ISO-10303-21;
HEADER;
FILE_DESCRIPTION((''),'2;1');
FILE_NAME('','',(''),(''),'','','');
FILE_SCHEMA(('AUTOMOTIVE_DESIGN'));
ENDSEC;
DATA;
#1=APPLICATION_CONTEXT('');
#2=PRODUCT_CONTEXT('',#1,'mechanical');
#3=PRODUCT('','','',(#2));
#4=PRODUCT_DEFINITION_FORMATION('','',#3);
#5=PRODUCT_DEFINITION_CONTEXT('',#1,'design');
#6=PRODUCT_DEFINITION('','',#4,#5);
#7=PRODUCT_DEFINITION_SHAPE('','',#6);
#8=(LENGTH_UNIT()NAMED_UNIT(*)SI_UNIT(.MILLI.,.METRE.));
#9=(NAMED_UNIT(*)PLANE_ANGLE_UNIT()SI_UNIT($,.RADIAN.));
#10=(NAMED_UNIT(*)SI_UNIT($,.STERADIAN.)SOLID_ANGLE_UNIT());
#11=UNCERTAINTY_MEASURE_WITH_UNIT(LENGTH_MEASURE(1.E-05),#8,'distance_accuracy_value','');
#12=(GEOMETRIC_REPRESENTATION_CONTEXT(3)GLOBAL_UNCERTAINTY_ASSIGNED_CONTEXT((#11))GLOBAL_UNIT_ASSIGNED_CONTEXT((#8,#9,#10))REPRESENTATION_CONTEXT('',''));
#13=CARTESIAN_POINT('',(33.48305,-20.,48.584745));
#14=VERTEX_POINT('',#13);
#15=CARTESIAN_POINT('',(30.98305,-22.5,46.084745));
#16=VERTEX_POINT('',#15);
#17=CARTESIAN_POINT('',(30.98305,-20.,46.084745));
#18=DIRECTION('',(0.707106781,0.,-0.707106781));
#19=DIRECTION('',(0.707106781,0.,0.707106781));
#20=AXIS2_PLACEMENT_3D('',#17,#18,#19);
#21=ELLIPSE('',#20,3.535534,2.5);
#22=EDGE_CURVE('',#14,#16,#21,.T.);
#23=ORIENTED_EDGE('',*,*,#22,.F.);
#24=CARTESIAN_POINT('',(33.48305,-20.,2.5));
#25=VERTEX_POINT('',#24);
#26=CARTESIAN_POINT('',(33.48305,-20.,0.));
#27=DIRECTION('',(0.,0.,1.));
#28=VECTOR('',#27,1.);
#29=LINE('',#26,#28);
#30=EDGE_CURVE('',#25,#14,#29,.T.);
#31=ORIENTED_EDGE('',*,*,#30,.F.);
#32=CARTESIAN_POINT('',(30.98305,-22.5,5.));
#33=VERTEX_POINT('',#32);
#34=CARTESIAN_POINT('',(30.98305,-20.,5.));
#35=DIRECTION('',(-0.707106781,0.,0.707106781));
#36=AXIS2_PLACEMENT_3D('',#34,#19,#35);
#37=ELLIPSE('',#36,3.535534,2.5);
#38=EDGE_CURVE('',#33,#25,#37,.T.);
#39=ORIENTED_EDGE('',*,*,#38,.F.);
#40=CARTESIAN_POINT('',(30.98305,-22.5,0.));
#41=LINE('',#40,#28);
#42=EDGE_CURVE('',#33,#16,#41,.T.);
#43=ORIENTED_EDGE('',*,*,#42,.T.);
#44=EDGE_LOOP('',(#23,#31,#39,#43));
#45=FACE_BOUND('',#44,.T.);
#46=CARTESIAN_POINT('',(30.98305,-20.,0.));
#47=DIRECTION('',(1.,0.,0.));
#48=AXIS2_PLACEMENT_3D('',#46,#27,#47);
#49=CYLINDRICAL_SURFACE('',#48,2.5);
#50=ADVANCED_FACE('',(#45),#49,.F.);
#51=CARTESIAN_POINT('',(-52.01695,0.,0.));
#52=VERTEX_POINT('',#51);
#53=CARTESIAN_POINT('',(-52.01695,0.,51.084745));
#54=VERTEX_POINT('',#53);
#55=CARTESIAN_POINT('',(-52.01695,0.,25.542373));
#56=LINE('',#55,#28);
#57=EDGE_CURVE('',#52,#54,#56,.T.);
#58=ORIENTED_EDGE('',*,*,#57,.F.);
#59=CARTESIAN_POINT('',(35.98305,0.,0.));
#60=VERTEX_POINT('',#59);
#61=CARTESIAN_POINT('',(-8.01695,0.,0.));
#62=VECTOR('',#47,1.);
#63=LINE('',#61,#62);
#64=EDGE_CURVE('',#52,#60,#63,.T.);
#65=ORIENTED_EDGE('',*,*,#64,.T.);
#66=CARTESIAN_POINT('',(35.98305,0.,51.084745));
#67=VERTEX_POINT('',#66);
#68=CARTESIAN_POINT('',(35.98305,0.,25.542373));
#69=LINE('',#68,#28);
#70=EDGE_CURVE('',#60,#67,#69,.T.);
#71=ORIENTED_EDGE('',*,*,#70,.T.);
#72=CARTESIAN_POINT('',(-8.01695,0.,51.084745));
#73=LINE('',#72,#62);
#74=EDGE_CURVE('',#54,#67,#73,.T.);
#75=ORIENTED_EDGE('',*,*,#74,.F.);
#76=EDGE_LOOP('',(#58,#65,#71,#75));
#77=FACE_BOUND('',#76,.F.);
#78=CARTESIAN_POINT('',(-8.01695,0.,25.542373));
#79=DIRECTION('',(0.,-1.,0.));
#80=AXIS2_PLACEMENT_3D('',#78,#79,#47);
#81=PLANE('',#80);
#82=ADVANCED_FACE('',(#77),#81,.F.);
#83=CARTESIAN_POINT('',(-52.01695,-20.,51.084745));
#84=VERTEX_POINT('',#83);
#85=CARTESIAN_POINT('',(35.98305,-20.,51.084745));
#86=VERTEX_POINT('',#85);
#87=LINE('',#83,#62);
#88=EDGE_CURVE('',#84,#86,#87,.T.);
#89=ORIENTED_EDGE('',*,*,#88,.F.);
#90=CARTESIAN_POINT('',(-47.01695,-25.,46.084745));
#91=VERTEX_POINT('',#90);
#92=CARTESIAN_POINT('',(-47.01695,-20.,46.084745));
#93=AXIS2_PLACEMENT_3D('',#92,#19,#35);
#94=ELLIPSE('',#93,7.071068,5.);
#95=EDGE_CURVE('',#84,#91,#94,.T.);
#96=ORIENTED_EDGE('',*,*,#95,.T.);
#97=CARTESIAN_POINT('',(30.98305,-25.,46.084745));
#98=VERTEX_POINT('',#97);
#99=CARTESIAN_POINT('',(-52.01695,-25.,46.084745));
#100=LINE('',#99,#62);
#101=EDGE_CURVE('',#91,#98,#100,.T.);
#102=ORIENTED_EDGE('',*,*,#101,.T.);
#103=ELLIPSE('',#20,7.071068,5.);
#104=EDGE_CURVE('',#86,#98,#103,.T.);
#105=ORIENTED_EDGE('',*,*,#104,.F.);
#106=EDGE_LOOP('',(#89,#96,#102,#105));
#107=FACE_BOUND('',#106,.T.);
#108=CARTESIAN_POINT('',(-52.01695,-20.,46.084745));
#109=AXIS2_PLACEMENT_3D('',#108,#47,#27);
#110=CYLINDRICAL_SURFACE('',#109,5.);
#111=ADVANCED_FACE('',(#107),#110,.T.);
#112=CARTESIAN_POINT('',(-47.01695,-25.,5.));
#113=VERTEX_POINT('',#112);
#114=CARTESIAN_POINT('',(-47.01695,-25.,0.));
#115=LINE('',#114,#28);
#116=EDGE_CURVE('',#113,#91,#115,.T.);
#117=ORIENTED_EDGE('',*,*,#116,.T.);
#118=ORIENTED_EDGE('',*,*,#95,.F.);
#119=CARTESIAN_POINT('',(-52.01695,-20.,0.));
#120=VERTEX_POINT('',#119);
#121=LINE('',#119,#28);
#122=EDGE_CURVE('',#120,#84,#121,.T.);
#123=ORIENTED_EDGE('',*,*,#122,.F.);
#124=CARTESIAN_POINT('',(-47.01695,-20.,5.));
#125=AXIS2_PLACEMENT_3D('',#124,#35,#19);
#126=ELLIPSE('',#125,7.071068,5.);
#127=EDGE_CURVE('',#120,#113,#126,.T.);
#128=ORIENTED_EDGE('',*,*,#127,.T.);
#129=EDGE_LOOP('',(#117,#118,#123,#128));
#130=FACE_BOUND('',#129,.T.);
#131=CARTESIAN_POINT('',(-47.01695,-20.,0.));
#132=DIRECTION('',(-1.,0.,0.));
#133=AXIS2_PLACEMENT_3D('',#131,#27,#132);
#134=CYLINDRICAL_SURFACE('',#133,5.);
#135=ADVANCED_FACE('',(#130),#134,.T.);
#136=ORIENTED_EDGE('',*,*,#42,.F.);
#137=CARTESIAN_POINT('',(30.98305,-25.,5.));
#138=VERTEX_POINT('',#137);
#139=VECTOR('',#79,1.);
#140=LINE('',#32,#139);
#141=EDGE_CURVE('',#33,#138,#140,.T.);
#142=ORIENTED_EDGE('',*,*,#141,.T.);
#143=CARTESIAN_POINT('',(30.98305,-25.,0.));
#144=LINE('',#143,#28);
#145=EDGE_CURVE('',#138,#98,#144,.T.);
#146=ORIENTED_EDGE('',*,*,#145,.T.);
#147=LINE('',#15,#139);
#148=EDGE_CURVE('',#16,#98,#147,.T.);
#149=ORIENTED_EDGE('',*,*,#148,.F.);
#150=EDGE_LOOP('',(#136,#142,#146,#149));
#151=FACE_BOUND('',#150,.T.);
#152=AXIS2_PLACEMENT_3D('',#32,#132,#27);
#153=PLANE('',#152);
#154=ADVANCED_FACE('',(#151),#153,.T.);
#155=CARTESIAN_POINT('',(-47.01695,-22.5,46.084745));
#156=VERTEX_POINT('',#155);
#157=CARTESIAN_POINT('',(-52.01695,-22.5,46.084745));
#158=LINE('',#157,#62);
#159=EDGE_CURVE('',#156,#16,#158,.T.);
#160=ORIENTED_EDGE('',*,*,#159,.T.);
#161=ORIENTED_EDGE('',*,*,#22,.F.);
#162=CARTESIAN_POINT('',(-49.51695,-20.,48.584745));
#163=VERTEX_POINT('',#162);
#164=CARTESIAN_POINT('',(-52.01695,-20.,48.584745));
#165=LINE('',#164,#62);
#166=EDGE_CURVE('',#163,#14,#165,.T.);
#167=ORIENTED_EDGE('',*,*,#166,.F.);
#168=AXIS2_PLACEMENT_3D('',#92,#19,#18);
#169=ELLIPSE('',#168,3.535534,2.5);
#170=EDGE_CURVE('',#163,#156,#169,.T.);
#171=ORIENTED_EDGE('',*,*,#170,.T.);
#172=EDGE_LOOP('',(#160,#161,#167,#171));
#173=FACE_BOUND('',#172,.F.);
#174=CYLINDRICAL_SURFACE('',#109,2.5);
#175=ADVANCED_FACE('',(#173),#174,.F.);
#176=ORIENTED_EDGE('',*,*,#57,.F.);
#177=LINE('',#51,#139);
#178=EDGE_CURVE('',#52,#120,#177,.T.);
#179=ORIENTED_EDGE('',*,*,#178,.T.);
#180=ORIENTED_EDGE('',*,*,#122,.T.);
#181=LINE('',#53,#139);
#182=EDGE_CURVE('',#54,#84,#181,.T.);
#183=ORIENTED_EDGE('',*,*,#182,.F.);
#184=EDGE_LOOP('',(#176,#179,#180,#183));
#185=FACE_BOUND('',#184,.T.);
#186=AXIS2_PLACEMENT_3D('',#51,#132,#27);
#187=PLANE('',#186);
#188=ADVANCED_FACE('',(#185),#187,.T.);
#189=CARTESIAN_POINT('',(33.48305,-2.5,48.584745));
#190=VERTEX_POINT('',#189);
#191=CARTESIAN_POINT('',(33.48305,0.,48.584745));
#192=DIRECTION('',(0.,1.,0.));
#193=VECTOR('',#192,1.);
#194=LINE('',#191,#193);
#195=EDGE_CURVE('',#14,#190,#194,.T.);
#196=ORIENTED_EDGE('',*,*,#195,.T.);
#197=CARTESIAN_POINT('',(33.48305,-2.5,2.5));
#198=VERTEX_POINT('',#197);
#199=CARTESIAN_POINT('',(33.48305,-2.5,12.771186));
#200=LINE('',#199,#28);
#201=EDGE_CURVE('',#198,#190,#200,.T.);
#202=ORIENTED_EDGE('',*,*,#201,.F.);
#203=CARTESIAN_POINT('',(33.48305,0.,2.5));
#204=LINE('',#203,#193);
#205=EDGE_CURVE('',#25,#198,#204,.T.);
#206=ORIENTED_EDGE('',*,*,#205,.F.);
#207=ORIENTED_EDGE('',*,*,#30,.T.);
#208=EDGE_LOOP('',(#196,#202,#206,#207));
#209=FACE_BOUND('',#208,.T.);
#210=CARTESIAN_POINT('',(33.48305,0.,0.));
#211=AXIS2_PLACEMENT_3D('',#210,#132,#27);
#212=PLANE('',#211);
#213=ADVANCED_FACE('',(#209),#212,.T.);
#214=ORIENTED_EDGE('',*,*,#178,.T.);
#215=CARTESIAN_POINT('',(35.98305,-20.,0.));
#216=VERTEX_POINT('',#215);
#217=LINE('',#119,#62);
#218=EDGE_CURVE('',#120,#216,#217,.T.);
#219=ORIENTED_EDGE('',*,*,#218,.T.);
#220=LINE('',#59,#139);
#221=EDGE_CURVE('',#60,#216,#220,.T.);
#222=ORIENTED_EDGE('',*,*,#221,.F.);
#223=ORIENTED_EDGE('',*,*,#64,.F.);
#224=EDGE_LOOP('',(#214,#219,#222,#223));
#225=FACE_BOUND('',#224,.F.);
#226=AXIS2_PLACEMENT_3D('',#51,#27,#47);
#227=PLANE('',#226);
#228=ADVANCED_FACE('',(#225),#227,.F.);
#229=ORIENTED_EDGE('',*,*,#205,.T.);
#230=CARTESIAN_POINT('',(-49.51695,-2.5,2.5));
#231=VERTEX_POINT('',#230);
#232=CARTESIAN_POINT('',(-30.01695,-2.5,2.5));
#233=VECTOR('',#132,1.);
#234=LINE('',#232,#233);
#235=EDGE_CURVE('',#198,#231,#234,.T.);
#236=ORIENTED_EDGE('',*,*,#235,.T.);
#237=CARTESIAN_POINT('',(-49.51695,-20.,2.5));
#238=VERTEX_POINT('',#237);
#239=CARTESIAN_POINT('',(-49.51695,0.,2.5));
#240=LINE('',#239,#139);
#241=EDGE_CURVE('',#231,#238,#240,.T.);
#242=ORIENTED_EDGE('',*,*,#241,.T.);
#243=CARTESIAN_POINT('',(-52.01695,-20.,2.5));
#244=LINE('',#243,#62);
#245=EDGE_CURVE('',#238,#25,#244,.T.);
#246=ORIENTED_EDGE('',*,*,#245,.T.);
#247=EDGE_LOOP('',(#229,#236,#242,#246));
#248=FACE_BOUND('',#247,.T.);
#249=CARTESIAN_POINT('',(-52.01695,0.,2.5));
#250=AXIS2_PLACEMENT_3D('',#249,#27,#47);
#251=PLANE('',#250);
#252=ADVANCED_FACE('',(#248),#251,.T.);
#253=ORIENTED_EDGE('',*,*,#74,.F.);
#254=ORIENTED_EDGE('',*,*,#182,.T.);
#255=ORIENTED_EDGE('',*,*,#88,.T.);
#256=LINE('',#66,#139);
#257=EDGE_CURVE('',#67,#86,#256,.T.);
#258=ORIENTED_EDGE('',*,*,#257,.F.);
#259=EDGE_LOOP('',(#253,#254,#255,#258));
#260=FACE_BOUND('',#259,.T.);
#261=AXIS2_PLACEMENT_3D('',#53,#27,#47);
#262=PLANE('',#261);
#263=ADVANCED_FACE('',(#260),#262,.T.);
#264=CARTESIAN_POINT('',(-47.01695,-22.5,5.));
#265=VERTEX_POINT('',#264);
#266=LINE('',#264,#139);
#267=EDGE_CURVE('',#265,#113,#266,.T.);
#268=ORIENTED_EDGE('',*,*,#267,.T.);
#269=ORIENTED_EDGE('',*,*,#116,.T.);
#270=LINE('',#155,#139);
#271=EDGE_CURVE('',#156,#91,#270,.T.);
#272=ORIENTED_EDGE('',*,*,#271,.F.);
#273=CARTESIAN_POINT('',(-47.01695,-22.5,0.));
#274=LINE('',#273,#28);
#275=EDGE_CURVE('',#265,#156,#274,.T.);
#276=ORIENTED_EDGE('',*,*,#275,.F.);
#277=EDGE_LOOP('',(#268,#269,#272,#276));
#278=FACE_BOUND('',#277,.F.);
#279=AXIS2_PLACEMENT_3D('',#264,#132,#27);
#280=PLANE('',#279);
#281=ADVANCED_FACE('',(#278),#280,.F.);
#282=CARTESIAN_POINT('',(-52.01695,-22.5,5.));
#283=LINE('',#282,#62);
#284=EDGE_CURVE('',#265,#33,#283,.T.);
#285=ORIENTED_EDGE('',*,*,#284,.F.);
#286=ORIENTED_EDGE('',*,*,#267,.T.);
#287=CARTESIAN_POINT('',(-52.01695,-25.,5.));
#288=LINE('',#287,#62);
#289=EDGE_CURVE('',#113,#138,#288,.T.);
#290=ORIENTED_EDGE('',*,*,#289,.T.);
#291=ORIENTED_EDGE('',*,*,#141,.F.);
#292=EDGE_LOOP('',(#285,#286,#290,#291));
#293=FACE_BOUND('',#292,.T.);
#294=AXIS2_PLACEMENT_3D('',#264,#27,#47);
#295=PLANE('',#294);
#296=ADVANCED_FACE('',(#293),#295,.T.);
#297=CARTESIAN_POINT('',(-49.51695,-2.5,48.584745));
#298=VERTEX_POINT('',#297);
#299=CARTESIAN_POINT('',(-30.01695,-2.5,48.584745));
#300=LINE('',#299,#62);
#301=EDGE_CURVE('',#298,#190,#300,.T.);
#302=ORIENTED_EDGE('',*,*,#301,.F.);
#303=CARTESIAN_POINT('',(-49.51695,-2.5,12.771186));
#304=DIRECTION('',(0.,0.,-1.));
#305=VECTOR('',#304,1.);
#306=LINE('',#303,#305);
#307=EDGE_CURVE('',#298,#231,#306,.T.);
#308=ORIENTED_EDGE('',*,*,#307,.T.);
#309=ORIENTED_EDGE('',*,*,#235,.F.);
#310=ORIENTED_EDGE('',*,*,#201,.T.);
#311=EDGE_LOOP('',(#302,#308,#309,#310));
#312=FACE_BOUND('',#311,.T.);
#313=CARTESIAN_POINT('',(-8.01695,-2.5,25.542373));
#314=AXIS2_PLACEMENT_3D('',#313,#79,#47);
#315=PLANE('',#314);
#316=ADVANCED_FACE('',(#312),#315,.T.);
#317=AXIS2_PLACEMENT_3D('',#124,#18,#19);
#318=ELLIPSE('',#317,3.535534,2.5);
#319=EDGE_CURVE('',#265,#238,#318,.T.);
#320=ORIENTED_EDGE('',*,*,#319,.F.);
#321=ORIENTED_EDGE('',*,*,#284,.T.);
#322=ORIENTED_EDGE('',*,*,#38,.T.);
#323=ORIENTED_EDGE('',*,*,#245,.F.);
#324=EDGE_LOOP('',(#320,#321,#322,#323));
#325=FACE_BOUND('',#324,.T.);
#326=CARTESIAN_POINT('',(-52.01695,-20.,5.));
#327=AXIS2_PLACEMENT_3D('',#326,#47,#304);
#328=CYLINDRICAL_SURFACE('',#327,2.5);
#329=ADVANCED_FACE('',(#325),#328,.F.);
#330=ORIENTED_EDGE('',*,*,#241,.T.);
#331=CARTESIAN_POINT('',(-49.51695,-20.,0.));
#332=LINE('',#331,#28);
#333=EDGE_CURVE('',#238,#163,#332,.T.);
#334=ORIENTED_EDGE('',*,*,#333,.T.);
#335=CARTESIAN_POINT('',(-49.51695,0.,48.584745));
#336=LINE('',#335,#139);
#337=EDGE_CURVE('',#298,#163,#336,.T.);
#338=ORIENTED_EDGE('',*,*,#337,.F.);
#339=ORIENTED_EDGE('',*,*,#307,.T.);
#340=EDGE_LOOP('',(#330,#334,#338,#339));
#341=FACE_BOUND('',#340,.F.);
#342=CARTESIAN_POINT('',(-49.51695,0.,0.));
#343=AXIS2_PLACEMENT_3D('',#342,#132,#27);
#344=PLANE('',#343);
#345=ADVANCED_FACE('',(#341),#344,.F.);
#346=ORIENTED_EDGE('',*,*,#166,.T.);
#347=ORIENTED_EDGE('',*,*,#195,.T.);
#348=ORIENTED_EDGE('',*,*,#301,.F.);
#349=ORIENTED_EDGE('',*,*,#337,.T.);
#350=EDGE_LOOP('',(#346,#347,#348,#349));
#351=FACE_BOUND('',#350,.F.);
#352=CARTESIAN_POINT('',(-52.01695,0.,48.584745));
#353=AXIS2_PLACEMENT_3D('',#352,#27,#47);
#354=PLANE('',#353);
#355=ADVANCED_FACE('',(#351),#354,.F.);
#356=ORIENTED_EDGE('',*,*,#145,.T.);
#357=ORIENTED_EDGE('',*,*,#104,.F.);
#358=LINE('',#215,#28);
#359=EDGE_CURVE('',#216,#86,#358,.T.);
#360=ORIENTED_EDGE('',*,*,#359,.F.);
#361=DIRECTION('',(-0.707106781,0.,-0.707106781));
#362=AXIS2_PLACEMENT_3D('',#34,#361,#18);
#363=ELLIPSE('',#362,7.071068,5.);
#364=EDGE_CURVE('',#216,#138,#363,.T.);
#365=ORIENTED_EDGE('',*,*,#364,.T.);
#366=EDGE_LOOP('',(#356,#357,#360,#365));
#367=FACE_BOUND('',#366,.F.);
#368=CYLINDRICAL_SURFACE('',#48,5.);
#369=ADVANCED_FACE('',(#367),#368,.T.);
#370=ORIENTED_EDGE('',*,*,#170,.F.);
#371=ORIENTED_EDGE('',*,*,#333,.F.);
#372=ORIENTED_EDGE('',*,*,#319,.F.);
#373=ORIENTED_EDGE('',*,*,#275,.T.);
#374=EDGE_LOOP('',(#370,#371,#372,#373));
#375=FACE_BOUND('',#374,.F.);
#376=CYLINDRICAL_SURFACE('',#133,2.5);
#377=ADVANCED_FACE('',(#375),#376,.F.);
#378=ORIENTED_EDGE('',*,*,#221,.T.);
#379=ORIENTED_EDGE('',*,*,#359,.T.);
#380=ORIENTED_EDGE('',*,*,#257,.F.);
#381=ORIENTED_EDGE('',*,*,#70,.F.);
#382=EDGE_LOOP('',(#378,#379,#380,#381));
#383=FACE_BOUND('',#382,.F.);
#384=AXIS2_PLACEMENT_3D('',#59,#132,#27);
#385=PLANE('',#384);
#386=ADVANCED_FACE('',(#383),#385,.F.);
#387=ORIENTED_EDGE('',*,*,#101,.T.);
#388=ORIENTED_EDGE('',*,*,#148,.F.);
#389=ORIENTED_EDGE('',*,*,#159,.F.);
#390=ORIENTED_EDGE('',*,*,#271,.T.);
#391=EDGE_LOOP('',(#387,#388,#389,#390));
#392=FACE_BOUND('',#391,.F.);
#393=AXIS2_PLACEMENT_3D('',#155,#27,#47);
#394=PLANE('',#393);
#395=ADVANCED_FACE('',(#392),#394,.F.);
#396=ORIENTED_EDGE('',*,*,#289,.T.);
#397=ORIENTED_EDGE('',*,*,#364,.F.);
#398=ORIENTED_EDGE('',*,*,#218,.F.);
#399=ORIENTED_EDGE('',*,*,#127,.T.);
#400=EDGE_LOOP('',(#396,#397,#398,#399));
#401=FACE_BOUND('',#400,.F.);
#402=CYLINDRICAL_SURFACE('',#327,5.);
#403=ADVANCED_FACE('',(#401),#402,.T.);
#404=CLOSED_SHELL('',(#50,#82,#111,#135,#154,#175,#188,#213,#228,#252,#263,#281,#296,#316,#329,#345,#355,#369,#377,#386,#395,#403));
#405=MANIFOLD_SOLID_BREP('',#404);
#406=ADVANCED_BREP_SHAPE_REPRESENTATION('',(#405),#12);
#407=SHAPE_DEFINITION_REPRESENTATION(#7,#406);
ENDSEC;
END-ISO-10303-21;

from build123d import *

# Parameters (mm, degrees)
F0_W     = 88
F0_H     = 51.0847450688
F1_DEPTH = 25
F2_R     = 5
F3_T     = -2.5


# Not quite as in the source:
# - a shell that OpenCascade refuses in one call is made with other operations: the cavity is built on its own and cut out


with BuildPart() as f1:
    # F0 (on Front) → F1 (new body)
    with BuildSketch(Plane.XZ):
        with Locations((-8.0169501303, 25.5423725344)):
            Rectangle(F0_W, F0_H)
    extrude(amount=F1_DEPTH)

    # F2
    f2_edges = [f1.edges().sort_by_distance(p)[0] for p in [
        (-52.01695, -25, 25.542373),
        (-8.01695, -25, 0),
        (35.98305, -25, 25.542373),
        (-8.01695, -25, 51.084745),
    ]]
    fillet(f2_edges, radius=F2_R)

    # F3: a shell. OpenCascade refuses it in one call, so the cavity is built on its own and cut out:
    # the body offset inwards by the wall thickness, plus a prism from it out through each open face.
    f3_core = offset(f1.part, amount=F3_T, mode=Mode.PRIVATE)
    f3_exits = [f3_core.faces().sort_by_distance(p)[0] for p in [
        (-8.01695, -22.5, 25.542373),
    ]]
    add(f3_core, mode=Mode.SUBTRACT)
    extrude(f3_exits, amount=-F3_T, mode=Mode.SUBTRACT)


solid = f1.part
